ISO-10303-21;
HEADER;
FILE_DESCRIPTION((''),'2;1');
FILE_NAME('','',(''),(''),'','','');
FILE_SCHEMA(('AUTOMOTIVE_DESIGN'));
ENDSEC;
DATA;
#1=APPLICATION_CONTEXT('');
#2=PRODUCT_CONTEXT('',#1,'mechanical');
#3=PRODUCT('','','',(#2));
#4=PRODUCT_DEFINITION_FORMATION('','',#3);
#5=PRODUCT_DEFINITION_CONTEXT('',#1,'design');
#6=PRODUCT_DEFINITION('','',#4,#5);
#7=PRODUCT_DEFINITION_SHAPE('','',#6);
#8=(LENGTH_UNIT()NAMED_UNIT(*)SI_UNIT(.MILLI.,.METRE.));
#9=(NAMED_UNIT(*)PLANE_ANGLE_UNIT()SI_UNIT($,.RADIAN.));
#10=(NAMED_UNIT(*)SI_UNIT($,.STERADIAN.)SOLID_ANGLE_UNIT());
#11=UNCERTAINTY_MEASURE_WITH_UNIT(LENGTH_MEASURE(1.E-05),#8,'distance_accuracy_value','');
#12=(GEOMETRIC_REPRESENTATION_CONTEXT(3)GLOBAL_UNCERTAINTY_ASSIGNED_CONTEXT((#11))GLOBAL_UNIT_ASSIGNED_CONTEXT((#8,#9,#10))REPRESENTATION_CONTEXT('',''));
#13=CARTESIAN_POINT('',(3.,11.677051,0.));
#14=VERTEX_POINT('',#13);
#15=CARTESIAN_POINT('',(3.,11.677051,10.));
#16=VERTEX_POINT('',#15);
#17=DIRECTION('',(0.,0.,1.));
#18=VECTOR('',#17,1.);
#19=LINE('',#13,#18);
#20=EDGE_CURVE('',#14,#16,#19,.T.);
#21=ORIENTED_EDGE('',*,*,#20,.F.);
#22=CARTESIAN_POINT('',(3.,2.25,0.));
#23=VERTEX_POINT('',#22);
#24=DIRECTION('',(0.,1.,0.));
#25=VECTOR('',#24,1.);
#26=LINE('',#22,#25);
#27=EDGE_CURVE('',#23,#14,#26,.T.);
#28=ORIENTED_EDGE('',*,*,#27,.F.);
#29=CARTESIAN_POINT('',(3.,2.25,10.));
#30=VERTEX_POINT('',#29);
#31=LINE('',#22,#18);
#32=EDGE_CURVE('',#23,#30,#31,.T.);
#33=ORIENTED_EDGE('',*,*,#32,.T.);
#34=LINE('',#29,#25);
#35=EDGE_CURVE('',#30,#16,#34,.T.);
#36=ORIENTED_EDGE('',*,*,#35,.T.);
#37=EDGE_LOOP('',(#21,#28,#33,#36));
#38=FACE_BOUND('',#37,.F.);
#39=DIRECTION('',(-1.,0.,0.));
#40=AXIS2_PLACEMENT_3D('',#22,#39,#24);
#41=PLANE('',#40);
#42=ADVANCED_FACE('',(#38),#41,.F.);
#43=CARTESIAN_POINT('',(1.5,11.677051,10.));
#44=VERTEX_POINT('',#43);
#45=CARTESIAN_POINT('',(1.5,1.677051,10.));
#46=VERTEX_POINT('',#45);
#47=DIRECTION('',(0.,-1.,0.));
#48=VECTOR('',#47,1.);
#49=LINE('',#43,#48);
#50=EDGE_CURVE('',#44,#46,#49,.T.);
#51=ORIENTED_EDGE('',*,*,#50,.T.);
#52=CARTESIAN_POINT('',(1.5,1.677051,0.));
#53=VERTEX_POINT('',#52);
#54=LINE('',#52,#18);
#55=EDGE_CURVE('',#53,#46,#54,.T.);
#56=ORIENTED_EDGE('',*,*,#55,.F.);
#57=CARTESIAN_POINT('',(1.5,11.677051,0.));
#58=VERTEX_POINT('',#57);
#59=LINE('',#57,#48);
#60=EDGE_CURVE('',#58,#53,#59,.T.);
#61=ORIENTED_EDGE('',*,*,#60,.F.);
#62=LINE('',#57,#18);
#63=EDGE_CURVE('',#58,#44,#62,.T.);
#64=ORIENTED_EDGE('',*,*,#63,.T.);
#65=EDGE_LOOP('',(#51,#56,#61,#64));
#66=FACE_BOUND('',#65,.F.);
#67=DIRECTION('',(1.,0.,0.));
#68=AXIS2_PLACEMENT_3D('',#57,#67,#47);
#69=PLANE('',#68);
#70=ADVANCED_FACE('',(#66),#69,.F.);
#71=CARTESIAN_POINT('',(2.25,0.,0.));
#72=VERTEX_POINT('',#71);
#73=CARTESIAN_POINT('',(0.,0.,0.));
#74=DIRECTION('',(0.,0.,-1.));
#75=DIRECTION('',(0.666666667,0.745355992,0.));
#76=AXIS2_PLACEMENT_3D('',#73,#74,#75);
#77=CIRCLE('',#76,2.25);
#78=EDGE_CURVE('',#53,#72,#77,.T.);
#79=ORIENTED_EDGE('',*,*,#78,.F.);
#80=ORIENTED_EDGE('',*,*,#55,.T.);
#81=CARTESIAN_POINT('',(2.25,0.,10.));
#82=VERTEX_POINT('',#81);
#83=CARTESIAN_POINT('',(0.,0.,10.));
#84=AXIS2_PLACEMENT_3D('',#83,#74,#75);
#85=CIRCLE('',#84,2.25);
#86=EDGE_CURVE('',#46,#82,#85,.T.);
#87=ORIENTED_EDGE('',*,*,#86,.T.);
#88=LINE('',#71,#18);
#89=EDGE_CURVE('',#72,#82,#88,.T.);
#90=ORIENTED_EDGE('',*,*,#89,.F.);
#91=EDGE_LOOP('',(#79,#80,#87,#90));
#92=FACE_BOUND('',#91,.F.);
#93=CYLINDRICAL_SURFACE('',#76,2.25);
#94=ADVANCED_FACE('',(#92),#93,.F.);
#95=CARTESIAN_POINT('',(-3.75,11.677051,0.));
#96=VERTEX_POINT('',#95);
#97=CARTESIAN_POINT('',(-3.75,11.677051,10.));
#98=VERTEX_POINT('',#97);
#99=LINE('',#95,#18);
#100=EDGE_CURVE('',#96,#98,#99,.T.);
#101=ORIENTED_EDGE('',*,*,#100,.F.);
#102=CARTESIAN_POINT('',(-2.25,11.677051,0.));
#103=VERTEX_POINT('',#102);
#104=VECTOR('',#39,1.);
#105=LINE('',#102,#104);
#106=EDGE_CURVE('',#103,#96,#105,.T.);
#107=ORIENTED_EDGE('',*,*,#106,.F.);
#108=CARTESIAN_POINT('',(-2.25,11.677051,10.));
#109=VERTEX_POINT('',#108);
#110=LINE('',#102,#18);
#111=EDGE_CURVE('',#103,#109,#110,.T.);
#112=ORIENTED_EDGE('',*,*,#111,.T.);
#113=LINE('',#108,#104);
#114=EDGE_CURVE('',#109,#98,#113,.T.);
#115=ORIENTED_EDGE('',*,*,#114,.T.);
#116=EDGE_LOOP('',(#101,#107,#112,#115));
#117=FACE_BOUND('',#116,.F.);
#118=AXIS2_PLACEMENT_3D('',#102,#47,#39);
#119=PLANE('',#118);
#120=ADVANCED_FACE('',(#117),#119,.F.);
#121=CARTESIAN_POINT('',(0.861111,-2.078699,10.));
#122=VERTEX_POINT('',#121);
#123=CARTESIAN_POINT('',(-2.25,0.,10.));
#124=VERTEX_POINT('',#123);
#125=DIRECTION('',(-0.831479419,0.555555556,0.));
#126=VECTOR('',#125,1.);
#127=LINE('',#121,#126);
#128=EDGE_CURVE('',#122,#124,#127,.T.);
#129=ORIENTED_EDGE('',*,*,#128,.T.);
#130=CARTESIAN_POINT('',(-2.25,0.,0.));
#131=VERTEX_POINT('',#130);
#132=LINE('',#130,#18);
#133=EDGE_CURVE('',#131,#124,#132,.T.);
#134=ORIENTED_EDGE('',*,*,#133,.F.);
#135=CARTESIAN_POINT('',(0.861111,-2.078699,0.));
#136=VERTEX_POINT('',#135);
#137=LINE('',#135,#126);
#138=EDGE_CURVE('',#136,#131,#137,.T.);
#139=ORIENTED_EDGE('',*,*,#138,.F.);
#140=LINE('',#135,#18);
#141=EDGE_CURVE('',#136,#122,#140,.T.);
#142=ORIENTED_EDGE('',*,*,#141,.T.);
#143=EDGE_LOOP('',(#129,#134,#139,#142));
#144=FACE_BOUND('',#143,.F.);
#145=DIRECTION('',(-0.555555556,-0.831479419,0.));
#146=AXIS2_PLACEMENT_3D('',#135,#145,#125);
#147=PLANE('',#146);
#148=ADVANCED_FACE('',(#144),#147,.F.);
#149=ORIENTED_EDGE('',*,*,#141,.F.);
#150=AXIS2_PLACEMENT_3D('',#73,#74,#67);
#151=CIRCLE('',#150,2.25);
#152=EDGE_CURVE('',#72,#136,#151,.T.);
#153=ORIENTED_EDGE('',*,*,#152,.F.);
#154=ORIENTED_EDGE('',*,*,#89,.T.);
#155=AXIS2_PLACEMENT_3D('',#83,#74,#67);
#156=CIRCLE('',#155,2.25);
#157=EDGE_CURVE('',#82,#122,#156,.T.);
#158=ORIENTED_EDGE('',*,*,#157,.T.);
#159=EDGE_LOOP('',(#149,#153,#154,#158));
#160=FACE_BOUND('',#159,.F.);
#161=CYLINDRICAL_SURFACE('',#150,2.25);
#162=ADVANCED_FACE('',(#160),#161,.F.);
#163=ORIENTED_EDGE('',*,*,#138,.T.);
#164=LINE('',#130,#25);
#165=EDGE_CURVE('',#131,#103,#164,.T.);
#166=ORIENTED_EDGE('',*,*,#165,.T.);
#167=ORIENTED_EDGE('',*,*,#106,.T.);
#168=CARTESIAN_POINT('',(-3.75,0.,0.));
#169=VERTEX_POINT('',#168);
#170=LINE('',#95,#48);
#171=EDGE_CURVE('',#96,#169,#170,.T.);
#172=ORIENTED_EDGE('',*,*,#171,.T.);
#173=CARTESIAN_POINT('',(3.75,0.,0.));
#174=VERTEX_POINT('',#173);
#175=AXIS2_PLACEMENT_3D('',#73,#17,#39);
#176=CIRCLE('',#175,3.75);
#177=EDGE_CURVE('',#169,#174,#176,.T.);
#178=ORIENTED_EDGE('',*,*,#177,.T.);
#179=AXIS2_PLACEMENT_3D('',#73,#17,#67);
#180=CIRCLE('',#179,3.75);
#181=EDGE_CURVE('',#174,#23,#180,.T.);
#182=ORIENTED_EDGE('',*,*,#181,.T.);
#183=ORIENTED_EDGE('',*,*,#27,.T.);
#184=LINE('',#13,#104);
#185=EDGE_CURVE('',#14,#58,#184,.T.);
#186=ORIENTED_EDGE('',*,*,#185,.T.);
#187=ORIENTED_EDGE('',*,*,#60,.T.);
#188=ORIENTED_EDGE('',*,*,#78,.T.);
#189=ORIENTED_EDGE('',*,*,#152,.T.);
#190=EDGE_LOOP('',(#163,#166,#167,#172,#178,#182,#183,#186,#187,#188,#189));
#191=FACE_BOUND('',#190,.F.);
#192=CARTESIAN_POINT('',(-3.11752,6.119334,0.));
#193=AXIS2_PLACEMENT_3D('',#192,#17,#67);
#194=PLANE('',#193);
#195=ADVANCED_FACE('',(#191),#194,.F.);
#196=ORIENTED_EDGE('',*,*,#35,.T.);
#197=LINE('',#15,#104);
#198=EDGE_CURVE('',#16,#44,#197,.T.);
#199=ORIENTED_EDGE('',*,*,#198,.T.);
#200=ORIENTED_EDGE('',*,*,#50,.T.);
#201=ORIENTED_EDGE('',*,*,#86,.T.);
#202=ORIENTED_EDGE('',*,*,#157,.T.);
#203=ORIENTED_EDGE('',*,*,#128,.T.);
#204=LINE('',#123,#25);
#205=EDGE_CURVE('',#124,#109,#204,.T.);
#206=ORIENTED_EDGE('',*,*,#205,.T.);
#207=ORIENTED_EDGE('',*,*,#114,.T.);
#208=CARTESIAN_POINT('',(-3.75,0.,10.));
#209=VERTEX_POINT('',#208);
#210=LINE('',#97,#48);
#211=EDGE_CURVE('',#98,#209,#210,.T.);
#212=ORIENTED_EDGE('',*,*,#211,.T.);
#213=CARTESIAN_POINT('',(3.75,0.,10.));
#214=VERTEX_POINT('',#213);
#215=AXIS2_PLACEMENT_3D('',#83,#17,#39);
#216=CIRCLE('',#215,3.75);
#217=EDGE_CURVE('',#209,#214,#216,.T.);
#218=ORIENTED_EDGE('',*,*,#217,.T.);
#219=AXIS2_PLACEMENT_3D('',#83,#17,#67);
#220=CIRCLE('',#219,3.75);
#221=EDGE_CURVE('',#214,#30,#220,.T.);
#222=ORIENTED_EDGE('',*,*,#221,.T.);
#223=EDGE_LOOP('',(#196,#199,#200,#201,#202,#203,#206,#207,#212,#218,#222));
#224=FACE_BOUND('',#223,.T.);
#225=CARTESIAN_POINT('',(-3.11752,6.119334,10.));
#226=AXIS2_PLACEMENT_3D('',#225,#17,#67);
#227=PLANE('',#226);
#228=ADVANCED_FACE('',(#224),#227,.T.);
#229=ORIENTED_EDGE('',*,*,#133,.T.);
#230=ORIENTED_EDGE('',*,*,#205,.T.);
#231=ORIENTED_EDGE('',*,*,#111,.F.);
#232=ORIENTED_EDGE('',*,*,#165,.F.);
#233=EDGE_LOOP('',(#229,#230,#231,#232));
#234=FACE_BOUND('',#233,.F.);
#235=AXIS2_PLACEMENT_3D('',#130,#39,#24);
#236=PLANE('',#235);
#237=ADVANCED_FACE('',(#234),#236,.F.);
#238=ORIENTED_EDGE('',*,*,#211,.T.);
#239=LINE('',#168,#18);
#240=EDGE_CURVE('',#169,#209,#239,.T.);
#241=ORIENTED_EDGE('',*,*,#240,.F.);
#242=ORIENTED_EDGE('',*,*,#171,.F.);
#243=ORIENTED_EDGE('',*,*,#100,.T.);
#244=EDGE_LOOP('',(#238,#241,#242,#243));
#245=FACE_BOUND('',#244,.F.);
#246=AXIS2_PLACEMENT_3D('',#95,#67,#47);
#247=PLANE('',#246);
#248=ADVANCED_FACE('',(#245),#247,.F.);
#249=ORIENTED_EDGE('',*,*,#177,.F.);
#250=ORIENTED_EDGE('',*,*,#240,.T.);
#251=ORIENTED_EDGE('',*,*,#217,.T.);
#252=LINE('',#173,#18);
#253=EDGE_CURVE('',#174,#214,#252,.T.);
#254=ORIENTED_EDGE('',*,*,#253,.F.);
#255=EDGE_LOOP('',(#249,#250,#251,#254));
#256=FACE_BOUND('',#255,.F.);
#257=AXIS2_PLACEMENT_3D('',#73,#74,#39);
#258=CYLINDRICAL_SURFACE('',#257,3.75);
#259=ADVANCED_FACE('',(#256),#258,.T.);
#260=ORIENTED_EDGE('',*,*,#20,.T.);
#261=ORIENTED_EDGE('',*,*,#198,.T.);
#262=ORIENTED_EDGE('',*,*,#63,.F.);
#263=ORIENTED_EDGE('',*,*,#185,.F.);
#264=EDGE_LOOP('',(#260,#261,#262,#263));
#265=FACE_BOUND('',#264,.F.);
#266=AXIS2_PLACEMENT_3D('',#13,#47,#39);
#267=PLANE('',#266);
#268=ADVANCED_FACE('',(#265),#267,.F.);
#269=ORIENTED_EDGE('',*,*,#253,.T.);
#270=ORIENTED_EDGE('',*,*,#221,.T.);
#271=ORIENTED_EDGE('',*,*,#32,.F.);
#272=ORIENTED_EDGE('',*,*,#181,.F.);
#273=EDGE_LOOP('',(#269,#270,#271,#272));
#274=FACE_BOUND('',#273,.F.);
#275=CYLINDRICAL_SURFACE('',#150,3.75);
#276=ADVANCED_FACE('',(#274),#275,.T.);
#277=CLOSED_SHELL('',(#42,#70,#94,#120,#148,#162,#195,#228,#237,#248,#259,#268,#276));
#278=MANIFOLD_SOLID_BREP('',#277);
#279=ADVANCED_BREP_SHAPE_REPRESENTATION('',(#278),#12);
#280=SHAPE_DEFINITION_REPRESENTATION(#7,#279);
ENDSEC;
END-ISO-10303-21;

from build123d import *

# Parameters (mm, degrees)
F1_DEPTH = 10


# Not quite as in the source:
# - a feature names something its author has since deleted; it is built from what else it names


with BuildPart() as f1:
    # F0 (on Top) → F1 (new body)
    with BuildSketch(Plane.XY):
        with BuildLine():
            ThreePointArc((-3.75, 0), (-3.3541019662, 1.6770509831), (-2.25, 3))
            Line((-2.25, 3), (-2.25, 11.6770509831))
            Line((-2.25, 11.6770509831), (-3.75, 11.6770509831))
            Line((-3.75, 11.6770509831), (-3.75, 0))
        make_face()
        with BuildLine():
            ThreePointArc((1.5, 1.6770509831), (2.0539595906, 0.9185586535), (2.25, 0))
            ThreePointArc((2.25, 0), (1.8708286934, -1.25), (0.8611111111, -2.0786985482))
            ThreePointArc((0.8611111111, -2.0786985482), (-1.25, -1.8708286934), (-2.25, 0))
            Line((-2.25, 0), (-2.25, 3))
            ThreePointArc((-2.25, 3), (-3.3541019662, 1.6770509831), (-3.75, 0))
            ThreePointArc((-3.75, 0), (0, -3.75), (3.75, 0))
            ThreePointArc((3.75, 0), (3.5575623677, 1.1858541226), (3, 2.25))
            ThreePointArc((3, 2.25), (2.3269511721, 2.9407139002), (1.5, 3.4369317712))
            Line((1.5, 3.4369317712), (1.5, 1.6770509831))
        make_face()
        with BuildLine():
            Line((1.5, 11.6770509831), (1.5, 3.4369317712))
            ThreePointArc((1.5, 3.4369317712), (2.3269511721, 2.9407139002), (3, 2.25))
            Line((3, 2.25), (3, 11.6770509831))
            Line((3, 11.6770509831), (1.5, 11.6770509831))
        make_face()
        with BuildLine():
            ThreePointArc((-2.25, 0), (-1.25, -1.8708286934), (0.8611111111, -2.0786985482))
            Line((0.8611111111, -2.0786985482), (-2.25, 0))
        make_face()
    extrude(amount=F1_DEPTH)


solid = f1.part
